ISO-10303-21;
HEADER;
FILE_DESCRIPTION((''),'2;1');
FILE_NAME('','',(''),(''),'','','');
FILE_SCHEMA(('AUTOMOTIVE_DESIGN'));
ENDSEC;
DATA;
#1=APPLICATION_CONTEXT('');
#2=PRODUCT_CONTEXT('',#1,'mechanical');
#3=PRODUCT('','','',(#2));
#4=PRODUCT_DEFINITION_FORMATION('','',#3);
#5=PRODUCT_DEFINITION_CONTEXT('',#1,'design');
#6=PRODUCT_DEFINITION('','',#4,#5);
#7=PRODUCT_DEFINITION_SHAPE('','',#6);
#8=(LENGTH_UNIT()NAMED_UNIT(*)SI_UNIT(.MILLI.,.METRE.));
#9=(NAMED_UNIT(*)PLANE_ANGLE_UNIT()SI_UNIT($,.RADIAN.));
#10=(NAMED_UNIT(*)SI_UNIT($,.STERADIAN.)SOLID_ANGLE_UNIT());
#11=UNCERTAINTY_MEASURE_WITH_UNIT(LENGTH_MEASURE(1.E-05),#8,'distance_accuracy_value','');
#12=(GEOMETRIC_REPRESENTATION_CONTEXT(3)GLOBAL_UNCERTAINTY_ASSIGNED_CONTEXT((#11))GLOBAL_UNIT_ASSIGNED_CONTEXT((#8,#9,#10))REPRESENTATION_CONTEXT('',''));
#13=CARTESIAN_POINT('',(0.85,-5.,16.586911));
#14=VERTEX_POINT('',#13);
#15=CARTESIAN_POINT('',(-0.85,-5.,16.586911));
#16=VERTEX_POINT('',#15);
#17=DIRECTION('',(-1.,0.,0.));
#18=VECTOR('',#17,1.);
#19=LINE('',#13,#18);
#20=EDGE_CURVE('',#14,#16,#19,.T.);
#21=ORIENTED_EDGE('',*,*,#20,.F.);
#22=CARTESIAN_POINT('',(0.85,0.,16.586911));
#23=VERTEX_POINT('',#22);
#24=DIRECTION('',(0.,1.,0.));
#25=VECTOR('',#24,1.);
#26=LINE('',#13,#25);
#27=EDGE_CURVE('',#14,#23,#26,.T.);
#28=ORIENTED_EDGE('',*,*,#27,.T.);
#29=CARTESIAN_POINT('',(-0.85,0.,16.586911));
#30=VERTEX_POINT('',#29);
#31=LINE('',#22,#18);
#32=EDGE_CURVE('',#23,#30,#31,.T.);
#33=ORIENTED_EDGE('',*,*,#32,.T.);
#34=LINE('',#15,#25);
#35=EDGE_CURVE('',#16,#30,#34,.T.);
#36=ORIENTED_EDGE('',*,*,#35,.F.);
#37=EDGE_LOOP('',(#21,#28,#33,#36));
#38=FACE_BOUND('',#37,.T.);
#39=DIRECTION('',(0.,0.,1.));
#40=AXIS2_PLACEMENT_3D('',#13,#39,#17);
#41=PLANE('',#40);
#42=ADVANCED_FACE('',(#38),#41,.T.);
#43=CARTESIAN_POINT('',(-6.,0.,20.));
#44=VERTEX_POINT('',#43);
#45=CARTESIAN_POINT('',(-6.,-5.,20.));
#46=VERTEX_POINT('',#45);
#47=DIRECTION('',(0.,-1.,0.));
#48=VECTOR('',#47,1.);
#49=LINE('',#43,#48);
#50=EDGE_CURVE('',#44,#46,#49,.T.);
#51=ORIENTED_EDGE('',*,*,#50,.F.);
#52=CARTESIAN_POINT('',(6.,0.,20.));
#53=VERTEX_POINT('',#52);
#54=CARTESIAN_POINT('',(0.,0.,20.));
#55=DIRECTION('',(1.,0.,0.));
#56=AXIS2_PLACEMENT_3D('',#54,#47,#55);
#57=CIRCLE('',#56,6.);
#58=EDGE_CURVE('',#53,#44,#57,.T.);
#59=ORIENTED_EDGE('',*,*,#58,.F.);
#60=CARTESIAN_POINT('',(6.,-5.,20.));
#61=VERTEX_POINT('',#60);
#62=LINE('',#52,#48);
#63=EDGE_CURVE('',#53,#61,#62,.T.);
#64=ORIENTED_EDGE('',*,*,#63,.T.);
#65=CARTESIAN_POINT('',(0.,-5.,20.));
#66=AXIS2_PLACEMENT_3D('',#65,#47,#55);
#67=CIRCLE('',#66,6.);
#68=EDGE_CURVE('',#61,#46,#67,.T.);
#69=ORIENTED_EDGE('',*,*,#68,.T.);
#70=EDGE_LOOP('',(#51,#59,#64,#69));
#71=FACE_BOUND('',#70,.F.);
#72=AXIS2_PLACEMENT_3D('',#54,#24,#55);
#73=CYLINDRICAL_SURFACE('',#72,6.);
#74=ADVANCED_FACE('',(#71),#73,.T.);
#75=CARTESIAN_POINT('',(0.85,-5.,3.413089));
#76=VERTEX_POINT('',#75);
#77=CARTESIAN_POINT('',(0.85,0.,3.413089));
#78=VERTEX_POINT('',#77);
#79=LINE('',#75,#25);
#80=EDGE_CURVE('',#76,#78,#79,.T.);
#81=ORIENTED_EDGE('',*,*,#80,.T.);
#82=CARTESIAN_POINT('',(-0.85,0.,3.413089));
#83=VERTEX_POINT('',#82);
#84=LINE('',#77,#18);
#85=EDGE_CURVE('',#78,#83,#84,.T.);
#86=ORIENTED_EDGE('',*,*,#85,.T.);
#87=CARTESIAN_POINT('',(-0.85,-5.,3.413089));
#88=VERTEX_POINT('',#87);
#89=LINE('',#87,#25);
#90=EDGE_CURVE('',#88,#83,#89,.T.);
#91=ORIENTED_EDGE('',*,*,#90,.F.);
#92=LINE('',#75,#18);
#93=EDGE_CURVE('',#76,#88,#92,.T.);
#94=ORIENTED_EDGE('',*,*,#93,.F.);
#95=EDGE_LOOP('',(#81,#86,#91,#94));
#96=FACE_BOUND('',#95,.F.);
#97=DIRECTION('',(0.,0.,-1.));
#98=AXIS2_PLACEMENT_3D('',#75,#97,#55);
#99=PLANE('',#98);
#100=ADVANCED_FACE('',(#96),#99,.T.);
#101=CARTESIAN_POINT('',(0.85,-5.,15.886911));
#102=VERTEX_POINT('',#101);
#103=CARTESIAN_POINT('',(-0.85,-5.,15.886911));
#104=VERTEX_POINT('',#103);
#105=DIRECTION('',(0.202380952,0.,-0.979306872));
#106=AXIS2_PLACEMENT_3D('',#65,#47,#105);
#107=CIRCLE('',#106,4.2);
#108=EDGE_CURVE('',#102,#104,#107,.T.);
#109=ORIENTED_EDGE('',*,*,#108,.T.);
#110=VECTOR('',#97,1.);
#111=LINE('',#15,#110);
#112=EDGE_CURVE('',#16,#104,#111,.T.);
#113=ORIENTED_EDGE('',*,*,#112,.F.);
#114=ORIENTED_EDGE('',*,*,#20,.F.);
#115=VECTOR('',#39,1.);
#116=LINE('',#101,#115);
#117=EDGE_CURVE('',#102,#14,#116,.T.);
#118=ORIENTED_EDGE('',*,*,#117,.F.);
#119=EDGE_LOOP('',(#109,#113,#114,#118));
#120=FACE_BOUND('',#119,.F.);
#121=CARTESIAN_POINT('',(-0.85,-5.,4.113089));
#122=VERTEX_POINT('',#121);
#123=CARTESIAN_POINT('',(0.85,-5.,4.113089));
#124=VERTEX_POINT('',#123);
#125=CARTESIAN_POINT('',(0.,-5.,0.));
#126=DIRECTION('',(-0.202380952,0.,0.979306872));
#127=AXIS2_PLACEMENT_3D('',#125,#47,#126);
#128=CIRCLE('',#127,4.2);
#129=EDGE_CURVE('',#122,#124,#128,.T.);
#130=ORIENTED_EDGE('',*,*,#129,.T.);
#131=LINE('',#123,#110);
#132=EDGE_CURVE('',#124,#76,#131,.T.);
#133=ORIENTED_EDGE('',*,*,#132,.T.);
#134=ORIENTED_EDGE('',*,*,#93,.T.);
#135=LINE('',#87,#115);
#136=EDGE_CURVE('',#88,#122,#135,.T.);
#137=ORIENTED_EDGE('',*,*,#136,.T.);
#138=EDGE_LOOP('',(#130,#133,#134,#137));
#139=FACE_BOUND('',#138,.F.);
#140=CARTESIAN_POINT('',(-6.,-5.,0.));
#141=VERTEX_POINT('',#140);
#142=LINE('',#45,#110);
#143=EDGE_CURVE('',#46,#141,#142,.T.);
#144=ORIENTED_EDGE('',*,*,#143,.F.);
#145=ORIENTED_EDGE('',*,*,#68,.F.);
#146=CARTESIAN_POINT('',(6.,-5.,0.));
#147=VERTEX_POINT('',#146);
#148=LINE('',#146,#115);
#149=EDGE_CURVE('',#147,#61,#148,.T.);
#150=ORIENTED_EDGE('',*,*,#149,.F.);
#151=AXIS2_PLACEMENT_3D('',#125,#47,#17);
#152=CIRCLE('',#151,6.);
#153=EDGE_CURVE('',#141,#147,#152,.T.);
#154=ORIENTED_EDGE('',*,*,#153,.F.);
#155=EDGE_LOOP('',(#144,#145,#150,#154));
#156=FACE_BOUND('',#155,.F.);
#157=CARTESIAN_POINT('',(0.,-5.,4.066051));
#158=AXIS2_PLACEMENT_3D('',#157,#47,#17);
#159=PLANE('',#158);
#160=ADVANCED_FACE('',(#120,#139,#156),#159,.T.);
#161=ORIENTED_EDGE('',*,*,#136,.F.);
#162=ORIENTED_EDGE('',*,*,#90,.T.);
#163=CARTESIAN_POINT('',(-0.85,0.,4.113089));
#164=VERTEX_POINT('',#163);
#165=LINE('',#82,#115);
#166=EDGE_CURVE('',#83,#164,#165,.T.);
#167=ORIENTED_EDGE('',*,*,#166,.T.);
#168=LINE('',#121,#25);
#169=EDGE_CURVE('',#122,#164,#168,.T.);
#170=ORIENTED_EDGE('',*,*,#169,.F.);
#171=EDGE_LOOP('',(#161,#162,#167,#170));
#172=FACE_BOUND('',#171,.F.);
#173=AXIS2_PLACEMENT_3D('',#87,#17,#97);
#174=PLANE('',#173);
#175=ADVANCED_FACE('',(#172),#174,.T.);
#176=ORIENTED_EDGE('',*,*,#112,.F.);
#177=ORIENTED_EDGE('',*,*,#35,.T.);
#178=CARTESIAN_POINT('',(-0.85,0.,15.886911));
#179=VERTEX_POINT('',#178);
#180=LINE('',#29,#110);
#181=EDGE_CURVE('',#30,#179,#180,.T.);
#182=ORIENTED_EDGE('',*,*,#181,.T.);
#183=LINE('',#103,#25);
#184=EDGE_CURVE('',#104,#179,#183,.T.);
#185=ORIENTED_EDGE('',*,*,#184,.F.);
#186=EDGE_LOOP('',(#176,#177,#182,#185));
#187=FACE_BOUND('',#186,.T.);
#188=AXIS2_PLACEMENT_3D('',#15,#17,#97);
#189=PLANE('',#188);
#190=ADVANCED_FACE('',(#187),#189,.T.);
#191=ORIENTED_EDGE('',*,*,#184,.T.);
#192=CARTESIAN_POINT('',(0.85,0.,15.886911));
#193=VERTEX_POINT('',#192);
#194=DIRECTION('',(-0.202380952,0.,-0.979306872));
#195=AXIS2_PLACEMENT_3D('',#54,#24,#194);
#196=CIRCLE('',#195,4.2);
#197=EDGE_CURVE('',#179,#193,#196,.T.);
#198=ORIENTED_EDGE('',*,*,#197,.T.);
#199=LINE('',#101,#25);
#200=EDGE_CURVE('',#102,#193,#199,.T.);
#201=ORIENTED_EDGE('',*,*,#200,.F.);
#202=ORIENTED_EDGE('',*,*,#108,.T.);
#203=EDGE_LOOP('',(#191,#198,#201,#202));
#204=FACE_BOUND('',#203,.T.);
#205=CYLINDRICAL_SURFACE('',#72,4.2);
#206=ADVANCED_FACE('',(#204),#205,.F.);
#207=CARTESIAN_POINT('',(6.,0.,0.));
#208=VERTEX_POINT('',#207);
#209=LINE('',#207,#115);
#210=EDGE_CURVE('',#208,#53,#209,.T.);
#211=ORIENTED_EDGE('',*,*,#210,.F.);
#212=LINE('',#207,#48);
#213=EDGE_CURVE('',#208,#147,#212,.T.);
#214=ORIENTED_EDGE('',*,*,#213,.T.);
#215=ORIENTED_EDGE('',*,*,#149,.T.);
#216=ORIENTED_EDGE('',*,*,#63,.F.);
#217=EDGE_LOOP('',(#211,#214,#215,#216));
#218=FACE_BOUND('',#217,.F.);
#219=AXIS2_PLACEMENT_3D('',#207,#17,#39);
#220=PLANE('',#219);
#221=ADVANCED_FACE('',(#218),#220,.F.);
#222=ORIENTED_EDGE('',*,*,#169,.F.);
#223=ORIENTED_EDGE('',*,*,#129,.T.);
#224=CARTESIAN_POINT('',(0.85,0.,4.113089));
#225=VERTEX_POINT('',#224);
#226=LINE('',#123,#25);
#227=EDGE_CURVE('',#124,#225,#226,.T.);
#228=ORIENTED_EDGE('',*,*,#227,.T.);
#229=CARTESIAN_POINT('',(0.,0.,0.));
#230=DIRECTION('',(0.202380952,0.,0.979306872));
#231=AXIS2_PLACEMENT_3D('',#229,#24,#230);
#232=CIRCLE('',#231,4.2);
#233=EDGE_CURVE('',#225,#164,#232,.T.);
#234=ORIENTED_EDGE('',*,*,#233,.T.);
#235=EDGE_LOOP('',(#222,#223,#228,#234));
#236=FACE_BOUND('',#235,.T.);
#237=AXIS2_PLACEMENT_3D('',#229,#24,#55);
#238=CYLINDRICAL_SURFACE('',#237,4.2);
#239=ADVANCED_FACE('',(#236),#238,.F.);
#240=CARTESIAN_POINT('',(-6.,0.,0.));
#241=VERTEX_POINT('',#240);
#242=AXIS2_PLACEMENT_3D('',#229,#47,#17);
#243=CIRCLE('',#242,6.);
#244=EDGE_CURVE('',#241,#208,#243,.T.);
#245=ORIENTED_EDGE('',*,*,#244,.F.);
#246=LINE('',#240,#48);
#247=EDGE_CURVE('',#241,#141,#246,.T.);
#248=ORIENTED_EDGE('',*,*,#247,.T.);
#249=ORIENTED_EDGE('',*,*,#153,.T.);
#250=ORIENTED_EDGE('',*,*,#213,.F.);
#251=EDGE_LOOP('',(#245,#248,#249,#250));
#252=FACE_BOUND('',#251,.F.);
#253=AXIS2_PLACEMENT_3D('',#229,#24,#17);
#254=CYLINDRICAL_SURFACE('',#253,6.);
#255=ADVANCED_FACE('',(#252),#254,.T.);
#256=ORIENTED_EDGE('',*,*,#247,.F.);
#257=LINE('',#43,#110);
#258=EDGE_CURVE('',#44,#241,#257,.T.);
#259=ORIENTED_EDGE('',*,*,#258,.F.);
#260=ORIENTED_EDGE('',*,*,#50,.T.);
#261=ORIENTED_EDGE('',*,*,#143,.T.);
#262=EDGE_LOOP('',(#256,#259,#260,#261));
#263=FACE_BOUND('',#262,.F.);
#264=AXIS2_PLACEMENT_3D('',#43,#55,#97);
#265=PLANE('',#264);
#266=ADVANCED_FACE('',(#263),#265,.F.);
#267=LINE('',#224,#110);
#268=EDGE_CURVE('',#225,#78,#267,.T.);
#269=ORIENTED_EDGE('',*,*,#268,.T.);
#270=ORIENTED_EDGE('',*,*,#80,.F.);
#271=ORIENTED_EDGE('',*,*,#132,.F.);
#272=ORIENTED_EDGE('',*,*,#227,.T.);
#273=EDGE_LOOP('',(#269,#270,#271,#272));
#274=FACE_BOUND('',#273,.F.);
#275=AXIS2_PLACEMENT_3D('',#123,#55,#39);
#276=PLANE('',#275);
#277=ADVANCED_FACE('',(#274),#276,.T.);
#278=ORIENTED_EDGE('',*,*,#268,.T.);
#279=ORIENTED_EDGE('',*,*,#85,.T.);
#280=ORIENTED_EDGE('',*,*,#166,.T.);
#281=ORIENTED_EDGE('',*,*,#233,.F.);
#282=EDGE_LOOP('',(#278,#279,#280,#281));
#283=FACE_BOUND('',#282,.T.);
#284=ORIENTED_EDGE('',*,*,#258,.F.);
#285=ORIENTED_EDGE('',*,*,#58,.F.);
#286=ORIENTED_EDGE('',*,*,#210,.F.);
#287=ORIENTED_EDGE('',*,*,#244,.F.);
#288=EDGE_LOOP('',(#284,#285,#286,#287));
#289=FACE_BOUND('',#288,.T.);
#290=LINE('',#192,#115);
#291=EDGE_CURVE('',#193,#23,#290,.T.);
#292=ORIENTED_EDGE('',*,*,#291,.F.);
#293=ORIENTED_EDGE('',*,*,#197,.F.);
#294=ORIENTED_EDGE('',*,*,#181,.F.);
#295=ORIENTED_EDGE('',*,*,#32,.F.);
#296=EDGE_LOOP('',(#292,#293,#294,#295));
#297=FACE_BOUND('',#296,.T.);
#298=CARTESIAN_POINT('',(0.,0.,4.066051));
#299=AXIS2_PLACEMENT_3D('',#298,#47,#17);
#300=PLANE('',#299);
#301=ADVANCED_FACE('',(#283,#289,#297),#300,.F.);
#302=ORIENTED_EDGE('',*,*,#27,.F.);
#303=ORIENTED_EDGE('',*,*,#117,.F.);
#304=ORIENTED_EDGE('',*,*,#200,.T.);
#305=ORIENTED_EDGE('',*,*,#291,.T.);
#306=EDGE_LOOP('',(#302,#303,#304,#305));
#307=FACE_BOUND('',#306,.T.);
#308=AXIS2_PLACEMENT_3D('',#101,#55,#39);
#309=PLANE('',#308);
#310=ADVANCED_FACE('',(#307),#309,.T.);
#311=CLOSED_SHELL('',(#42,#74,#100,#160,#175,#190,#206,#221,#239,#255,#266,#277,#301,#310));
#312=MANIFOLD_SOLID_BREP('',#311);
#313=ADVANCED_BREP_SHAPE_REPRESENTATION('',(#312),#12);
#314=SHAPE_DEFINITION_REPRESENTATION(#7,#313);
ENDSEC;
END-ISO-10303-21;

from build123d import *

# Parameters (mm, degrees)
F0_R     = 4.2
F1_DEPTH = 5
F3_DEPTH = 5


# Not quite as in the source:
# - a pattern or mirror of a feature is missing from the dataset's text; its kind, count and spacing are read off the source's solid


with BuildPart() as f1:
    # F0 (on Front) → F1 (new body)
    with BuildSketch(Plane.XZ):
        with BuildLine():
            Line((-6, 20), (-6, 0))
            ThreePointArc((-6, 0), (0, -6), (6, 0))
            Line((6, 0), (6, 20))
            ThreePointArc((6, 20), (0, 26), (-6, 20))
        make_face()
        Circle(F0_R, mode=Mode.SUBTRACT)
        with Locations((0, 20)):
            Circle(F0_R, mode=Mode.SUBTRACT)
    extrude(amount=F1_DEPTH)

    # F2 (on face) → F3 (join, through all)
    with BuildSketch(Plane.XZ.offset(5)):
        Polygon((-0.85, 16.5869111364), (-0.85, 15.8869111364), (0, 14.8420017213), (0.85, 15.8869111364), (0.85, 16.5869111364), align=None)
    f3 = extrude(amount=-F3_DEPTH)

    # F3_copies: F3 across plane
    add(f3.mirror(Plane(origin=(0, 0, 10), x_dir=(-1, 0, 0), z_dir=(0, 0, -1))))


solid = f1.part
